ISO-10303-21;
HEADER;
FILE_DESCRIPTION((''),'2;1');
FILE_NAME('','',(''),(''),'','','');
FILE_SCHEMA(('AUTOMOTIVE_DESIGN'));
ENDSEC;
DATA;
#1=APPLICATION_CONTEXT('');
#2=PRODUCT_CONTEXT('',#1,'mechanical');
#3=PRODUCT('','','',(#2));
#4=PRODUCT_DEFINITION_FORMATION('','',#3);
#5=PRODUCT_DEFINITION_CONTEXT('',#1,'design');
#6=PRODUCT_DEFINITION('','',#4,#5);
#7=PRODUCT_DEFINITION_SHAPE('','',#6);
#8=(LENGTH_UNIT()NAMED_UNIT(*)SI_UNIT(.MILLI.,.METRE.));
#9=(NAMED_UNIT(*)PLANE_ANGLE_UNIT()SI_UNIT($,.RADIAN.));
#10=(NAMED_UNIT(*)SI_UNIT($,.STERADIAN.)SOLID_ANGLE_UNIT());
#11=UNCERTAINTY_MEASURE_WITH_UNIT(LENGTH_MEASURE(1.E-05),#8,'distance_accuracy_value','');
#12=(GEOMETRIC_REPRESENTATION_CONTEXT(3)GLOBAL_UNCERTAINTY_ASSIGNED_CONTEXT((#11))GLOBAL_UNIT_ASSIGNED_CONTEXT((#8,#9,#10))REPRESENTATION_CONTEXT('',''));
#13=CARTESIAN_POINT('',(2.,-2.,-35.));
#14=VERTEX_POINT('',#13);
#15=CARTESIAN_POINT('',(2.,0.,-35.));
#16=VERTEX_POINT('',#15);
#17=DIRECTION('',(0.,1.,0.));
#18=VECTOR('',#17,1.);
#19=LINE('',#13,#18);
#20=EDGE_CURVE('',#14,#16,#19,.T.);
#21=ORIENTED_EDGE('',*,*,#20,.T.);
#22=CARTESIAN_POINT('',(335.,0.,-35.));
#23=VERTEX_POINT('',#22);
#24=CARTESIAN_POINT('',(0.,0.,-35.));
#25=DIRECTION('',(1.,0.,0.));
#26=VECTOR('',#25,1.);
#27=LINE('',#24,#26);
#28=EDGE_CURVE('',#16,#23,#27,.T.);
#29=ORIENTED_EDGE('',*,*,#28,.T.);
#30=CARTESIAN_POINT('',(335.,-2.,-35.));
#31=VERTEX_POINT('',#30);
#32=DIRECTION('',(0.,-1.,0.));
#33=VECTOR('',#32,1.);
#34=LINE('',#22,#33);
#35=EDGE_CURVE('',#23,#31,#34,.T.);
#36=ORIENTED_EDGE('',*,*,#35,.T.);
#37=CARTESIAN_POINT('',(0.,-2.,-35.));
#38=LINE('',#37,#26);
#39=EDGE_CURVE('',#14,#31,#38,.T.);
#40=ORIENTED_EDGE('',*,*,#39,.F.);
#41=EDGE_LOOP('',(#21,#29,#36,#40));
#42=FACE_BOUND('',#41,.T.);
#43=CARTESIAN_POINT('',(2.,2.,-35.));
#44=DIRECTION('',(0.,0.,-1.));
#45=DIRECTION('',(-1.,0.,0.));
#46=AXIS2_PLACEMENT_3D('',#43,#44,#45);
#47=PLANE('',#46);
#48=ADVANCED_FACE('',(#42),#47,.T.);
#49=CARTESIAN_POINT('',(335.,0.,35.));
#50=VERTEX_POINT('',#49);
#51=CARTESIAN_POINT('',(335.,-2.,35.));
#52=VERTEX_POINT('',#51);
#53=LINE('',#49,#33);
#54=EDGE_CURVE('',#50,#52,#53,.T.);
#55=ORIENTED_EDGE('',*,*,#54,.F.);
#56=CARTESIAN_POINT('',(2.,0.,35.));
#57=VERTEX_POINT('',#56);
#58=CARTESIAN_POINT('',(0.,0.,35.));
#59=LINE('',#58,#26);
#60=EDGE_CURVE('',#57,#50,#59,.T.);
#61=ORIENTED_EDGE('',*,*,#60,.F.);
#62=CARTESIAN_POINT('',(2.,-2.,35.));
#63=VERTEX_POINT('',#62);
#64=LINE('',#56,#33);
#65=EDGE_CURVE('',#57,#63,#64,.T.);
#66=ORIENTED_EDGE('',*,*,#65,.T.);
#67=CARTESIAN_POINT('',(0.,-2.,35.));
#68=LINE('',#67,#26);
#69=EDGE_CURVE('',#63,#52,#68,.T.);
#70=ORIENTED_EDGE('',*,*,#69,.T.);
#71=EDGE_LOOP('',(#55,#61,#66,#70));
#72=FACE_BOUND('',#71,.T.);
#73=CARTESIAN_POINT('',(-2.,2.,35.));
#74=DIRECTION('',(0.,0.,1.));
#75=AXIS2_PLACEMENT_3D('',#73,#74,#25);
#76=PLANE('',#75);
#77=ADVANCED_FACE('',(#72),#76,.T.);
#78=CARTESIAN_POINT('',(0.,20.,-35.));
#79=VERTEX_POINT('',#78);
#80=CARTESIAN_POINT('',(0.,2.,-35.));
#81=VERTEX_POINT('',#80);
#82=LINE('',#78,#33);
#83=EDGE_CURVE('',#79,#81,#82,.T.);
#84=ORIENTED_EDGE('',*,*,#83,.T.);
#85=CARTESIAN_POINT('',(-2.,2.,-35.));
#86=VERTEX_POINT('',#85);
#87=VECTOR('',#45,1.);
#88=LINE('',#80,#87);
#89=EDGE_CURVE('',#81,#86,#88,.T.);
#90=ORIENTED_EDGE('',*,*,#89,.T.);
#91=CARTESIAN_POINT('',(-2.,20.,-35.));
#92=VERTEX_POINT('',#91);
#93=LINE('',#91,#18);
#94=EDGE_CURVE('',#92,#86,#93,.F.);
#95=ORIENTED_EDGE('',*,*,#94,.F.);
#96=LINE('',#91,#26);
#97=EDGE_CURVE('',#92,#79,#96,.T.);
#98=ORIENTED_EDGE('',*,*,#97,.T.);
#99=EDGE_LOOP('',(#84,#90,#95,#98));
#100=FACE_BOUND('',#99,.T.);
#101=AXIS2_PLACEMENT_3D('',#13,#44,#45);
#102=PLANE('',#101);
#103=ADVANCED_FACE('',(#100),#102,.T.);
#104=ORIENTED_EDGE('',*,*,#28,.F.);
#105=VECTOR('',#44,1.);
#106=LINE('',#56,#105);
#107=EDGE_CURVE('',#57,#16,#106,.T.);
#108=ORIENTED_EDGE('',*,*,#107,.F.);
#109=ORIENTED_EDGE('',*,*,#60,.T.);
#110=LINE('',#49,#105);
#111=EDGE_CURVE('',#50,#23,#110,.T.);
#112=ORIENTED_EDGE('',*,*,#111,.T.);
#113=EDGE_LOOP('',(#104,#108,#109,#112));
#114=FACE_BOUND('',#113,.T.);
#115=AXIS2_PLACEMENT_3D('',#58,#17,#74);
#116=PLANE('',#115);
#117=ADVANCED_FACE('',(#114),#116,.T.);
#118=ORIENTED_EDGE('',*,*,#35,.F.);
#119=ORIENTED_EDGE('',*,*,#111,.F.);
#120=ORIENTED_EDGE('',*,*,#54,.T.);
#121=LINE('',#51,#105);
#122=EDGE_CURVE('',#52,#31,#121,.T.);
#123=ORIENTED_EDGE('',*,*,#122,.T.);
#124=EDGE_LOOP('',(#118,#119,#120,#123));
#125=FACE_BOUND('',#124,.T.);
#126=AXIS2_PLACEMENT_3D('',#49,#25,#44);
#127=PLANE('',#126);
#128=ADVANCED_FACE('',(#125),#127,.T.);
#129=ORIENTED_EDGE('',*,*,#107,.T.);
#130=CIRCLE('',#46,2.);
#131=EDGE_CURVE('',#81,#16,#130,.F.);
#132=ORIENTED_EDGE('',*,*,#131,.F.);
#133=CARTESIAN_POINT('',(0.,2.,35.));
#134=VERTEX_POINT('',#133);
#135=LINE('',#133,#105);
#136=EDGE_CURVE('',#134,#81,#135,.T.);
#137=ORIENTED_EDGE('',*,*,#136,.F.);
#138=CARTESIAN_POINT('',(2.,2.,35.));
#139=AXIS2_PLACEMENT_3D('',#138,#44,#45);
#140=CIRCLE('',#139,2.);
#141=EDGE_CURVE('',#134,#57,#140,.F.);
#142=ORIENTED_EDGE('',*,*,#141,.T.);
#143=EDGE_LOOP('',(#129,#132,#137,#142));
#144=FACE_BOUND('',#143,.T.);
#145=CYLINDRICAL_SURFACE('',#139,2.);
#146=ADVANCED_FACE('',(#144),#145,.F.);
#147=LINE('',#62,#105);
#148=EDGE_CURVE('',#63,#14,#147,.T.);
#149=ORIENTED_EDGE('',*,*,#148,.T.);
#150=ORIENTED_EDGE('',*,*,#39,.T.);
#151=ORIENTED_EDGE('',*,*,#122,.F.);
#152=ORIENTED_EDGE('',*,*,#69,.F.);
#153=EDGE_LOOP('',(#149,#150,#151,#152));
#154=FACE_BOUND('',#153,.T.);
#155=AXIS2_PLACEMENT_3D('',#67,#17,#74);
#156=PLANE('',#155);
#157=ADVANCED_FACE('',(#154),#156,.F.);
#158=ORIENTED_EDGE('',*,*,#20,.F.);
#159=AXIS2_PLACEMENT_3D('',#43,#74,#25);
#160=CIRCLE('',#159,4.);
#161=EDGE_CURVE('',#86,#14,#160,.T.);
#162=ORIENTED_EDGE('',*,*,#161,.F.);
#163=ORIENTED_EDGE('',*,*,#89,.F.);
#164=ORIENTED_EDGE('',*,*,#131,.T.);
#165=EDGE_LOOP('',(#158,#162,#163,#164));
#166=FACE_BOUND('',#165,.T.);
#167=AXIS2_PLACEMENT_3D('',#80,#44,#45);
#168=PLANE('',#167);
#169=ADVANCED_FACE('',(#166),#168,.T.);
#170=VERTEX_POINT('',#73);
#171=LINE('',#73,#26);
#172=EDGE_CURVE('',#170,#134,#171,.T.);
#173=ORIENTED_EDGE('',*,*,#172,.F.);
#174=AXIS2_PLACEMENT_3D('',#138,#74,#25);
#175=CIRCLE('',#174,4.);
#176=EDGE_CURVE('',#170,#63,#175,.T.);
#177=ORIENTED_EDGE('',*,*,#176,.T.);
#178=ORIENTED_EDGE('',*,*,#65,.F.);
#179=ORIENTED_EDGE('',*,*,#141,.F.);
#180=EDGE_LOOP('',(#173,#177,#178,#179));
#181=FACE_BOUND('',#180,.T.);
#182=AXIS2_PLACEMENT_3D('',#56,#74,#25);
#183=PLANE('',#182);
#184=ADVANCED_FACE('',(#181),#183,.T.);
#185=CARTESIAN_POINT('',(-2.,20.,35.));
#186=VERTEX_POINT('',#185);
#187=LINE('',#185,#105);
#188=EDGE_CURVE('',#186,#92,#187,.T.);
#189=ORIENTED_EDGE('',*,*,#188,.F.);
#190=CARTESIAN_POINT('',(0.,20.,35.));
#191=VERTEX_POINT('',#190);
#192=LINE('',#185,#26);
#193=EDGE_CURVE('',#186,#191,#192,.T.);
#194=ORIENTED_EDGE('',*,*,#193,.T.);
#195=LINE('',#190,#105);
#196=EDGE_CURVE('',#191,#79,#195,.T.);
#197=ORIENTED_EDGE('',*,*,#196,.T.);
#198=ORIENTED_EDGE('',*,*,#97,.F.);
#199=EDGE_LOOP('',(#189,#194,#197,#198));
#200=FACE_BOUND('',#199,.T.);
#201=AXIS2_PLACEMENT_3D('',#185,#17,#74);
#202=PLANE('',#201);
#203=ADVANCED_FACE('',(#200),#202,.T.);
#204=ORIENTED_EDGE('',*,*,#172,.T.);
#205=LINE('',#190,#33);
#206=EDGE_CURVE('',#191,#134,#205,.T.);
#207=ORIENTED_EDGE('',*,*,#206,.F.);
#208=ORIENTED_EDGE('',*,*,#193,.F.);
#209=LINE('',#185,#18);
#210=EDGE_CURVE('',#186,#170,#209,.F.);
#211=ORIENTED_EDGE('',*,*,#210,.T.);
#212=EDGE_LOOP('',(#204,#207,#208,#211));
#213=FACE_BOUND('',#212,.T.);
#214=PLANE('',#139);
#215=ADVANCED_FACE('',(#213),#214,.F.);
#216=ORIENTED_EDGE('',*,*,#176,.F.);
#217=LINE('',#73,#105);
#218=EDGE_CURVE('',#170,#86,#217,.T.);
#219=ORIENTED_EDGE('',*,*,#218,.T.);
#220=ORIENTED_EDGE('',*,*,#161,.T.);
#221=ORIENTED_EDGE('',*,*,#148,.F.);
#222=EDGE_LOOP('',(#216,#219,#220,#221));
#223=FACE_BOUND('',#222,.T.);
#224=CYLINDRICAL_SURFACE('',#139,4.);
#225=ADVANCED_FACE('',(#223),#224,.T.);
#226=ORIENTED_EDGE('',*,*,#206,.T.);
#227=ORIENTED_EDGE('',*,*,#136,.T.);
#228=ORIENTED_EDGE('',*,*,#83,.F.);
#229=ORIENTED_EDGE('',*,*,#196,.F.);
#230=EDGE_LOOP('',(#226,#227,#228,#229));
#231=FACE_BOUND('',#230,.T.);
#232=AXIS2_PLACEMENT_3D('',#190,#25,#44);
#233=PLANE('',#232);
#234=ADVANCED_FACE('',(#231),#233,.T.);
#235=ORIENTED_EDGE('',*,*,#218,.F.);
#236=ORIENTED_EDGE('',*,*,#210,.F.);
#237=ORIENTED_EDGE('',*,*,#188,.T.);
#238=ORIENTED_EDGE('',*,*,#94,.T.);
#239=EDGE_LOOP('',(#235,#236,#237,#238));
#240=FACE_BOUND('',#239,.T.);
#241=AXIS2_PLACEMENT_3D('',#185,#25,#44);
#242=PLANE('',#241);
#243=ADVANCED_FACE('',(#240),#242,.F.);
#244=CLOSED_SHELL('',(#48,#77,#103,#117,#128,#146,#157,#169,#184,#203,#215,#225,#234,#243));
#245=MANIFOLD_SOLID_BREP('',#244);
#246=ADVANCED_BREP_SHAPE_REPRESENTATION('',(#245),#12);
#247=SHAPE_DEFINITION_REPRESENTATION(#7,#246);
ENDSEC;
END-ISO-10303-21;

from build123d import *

# Parameters (mm, degrees)
SM_BASE_FLANGE_367_DEPTH = 35


# Sheet-metal steps are written as plain solids
with BuildPart() as part:
    # Sketch 1 → Sm Base Flange 367 (new, symmetric)
    with BuildSketch(Plane.XY):
        with BuildLine():
            Line((0, 20), (0, 2))
            ThreePointArc((0, 2), (0.585786438, 0.585786438), (2, 0))
            Line((2, 0), (335, 0))
            Line((335, 0), (335, -2))
            Line((335, -2), (2, -2))
            ThreePointArc((2, -2), (-0.828427125, -0.828427125), (-2, 2))
            Line((-2, 2), (-2, 20))
            Line((-2, 20), (0, 20))
        make_face()
    extrude(amount=SM_BASE_FLANGE_367_DEPTH, both=True)


solid = part.part
